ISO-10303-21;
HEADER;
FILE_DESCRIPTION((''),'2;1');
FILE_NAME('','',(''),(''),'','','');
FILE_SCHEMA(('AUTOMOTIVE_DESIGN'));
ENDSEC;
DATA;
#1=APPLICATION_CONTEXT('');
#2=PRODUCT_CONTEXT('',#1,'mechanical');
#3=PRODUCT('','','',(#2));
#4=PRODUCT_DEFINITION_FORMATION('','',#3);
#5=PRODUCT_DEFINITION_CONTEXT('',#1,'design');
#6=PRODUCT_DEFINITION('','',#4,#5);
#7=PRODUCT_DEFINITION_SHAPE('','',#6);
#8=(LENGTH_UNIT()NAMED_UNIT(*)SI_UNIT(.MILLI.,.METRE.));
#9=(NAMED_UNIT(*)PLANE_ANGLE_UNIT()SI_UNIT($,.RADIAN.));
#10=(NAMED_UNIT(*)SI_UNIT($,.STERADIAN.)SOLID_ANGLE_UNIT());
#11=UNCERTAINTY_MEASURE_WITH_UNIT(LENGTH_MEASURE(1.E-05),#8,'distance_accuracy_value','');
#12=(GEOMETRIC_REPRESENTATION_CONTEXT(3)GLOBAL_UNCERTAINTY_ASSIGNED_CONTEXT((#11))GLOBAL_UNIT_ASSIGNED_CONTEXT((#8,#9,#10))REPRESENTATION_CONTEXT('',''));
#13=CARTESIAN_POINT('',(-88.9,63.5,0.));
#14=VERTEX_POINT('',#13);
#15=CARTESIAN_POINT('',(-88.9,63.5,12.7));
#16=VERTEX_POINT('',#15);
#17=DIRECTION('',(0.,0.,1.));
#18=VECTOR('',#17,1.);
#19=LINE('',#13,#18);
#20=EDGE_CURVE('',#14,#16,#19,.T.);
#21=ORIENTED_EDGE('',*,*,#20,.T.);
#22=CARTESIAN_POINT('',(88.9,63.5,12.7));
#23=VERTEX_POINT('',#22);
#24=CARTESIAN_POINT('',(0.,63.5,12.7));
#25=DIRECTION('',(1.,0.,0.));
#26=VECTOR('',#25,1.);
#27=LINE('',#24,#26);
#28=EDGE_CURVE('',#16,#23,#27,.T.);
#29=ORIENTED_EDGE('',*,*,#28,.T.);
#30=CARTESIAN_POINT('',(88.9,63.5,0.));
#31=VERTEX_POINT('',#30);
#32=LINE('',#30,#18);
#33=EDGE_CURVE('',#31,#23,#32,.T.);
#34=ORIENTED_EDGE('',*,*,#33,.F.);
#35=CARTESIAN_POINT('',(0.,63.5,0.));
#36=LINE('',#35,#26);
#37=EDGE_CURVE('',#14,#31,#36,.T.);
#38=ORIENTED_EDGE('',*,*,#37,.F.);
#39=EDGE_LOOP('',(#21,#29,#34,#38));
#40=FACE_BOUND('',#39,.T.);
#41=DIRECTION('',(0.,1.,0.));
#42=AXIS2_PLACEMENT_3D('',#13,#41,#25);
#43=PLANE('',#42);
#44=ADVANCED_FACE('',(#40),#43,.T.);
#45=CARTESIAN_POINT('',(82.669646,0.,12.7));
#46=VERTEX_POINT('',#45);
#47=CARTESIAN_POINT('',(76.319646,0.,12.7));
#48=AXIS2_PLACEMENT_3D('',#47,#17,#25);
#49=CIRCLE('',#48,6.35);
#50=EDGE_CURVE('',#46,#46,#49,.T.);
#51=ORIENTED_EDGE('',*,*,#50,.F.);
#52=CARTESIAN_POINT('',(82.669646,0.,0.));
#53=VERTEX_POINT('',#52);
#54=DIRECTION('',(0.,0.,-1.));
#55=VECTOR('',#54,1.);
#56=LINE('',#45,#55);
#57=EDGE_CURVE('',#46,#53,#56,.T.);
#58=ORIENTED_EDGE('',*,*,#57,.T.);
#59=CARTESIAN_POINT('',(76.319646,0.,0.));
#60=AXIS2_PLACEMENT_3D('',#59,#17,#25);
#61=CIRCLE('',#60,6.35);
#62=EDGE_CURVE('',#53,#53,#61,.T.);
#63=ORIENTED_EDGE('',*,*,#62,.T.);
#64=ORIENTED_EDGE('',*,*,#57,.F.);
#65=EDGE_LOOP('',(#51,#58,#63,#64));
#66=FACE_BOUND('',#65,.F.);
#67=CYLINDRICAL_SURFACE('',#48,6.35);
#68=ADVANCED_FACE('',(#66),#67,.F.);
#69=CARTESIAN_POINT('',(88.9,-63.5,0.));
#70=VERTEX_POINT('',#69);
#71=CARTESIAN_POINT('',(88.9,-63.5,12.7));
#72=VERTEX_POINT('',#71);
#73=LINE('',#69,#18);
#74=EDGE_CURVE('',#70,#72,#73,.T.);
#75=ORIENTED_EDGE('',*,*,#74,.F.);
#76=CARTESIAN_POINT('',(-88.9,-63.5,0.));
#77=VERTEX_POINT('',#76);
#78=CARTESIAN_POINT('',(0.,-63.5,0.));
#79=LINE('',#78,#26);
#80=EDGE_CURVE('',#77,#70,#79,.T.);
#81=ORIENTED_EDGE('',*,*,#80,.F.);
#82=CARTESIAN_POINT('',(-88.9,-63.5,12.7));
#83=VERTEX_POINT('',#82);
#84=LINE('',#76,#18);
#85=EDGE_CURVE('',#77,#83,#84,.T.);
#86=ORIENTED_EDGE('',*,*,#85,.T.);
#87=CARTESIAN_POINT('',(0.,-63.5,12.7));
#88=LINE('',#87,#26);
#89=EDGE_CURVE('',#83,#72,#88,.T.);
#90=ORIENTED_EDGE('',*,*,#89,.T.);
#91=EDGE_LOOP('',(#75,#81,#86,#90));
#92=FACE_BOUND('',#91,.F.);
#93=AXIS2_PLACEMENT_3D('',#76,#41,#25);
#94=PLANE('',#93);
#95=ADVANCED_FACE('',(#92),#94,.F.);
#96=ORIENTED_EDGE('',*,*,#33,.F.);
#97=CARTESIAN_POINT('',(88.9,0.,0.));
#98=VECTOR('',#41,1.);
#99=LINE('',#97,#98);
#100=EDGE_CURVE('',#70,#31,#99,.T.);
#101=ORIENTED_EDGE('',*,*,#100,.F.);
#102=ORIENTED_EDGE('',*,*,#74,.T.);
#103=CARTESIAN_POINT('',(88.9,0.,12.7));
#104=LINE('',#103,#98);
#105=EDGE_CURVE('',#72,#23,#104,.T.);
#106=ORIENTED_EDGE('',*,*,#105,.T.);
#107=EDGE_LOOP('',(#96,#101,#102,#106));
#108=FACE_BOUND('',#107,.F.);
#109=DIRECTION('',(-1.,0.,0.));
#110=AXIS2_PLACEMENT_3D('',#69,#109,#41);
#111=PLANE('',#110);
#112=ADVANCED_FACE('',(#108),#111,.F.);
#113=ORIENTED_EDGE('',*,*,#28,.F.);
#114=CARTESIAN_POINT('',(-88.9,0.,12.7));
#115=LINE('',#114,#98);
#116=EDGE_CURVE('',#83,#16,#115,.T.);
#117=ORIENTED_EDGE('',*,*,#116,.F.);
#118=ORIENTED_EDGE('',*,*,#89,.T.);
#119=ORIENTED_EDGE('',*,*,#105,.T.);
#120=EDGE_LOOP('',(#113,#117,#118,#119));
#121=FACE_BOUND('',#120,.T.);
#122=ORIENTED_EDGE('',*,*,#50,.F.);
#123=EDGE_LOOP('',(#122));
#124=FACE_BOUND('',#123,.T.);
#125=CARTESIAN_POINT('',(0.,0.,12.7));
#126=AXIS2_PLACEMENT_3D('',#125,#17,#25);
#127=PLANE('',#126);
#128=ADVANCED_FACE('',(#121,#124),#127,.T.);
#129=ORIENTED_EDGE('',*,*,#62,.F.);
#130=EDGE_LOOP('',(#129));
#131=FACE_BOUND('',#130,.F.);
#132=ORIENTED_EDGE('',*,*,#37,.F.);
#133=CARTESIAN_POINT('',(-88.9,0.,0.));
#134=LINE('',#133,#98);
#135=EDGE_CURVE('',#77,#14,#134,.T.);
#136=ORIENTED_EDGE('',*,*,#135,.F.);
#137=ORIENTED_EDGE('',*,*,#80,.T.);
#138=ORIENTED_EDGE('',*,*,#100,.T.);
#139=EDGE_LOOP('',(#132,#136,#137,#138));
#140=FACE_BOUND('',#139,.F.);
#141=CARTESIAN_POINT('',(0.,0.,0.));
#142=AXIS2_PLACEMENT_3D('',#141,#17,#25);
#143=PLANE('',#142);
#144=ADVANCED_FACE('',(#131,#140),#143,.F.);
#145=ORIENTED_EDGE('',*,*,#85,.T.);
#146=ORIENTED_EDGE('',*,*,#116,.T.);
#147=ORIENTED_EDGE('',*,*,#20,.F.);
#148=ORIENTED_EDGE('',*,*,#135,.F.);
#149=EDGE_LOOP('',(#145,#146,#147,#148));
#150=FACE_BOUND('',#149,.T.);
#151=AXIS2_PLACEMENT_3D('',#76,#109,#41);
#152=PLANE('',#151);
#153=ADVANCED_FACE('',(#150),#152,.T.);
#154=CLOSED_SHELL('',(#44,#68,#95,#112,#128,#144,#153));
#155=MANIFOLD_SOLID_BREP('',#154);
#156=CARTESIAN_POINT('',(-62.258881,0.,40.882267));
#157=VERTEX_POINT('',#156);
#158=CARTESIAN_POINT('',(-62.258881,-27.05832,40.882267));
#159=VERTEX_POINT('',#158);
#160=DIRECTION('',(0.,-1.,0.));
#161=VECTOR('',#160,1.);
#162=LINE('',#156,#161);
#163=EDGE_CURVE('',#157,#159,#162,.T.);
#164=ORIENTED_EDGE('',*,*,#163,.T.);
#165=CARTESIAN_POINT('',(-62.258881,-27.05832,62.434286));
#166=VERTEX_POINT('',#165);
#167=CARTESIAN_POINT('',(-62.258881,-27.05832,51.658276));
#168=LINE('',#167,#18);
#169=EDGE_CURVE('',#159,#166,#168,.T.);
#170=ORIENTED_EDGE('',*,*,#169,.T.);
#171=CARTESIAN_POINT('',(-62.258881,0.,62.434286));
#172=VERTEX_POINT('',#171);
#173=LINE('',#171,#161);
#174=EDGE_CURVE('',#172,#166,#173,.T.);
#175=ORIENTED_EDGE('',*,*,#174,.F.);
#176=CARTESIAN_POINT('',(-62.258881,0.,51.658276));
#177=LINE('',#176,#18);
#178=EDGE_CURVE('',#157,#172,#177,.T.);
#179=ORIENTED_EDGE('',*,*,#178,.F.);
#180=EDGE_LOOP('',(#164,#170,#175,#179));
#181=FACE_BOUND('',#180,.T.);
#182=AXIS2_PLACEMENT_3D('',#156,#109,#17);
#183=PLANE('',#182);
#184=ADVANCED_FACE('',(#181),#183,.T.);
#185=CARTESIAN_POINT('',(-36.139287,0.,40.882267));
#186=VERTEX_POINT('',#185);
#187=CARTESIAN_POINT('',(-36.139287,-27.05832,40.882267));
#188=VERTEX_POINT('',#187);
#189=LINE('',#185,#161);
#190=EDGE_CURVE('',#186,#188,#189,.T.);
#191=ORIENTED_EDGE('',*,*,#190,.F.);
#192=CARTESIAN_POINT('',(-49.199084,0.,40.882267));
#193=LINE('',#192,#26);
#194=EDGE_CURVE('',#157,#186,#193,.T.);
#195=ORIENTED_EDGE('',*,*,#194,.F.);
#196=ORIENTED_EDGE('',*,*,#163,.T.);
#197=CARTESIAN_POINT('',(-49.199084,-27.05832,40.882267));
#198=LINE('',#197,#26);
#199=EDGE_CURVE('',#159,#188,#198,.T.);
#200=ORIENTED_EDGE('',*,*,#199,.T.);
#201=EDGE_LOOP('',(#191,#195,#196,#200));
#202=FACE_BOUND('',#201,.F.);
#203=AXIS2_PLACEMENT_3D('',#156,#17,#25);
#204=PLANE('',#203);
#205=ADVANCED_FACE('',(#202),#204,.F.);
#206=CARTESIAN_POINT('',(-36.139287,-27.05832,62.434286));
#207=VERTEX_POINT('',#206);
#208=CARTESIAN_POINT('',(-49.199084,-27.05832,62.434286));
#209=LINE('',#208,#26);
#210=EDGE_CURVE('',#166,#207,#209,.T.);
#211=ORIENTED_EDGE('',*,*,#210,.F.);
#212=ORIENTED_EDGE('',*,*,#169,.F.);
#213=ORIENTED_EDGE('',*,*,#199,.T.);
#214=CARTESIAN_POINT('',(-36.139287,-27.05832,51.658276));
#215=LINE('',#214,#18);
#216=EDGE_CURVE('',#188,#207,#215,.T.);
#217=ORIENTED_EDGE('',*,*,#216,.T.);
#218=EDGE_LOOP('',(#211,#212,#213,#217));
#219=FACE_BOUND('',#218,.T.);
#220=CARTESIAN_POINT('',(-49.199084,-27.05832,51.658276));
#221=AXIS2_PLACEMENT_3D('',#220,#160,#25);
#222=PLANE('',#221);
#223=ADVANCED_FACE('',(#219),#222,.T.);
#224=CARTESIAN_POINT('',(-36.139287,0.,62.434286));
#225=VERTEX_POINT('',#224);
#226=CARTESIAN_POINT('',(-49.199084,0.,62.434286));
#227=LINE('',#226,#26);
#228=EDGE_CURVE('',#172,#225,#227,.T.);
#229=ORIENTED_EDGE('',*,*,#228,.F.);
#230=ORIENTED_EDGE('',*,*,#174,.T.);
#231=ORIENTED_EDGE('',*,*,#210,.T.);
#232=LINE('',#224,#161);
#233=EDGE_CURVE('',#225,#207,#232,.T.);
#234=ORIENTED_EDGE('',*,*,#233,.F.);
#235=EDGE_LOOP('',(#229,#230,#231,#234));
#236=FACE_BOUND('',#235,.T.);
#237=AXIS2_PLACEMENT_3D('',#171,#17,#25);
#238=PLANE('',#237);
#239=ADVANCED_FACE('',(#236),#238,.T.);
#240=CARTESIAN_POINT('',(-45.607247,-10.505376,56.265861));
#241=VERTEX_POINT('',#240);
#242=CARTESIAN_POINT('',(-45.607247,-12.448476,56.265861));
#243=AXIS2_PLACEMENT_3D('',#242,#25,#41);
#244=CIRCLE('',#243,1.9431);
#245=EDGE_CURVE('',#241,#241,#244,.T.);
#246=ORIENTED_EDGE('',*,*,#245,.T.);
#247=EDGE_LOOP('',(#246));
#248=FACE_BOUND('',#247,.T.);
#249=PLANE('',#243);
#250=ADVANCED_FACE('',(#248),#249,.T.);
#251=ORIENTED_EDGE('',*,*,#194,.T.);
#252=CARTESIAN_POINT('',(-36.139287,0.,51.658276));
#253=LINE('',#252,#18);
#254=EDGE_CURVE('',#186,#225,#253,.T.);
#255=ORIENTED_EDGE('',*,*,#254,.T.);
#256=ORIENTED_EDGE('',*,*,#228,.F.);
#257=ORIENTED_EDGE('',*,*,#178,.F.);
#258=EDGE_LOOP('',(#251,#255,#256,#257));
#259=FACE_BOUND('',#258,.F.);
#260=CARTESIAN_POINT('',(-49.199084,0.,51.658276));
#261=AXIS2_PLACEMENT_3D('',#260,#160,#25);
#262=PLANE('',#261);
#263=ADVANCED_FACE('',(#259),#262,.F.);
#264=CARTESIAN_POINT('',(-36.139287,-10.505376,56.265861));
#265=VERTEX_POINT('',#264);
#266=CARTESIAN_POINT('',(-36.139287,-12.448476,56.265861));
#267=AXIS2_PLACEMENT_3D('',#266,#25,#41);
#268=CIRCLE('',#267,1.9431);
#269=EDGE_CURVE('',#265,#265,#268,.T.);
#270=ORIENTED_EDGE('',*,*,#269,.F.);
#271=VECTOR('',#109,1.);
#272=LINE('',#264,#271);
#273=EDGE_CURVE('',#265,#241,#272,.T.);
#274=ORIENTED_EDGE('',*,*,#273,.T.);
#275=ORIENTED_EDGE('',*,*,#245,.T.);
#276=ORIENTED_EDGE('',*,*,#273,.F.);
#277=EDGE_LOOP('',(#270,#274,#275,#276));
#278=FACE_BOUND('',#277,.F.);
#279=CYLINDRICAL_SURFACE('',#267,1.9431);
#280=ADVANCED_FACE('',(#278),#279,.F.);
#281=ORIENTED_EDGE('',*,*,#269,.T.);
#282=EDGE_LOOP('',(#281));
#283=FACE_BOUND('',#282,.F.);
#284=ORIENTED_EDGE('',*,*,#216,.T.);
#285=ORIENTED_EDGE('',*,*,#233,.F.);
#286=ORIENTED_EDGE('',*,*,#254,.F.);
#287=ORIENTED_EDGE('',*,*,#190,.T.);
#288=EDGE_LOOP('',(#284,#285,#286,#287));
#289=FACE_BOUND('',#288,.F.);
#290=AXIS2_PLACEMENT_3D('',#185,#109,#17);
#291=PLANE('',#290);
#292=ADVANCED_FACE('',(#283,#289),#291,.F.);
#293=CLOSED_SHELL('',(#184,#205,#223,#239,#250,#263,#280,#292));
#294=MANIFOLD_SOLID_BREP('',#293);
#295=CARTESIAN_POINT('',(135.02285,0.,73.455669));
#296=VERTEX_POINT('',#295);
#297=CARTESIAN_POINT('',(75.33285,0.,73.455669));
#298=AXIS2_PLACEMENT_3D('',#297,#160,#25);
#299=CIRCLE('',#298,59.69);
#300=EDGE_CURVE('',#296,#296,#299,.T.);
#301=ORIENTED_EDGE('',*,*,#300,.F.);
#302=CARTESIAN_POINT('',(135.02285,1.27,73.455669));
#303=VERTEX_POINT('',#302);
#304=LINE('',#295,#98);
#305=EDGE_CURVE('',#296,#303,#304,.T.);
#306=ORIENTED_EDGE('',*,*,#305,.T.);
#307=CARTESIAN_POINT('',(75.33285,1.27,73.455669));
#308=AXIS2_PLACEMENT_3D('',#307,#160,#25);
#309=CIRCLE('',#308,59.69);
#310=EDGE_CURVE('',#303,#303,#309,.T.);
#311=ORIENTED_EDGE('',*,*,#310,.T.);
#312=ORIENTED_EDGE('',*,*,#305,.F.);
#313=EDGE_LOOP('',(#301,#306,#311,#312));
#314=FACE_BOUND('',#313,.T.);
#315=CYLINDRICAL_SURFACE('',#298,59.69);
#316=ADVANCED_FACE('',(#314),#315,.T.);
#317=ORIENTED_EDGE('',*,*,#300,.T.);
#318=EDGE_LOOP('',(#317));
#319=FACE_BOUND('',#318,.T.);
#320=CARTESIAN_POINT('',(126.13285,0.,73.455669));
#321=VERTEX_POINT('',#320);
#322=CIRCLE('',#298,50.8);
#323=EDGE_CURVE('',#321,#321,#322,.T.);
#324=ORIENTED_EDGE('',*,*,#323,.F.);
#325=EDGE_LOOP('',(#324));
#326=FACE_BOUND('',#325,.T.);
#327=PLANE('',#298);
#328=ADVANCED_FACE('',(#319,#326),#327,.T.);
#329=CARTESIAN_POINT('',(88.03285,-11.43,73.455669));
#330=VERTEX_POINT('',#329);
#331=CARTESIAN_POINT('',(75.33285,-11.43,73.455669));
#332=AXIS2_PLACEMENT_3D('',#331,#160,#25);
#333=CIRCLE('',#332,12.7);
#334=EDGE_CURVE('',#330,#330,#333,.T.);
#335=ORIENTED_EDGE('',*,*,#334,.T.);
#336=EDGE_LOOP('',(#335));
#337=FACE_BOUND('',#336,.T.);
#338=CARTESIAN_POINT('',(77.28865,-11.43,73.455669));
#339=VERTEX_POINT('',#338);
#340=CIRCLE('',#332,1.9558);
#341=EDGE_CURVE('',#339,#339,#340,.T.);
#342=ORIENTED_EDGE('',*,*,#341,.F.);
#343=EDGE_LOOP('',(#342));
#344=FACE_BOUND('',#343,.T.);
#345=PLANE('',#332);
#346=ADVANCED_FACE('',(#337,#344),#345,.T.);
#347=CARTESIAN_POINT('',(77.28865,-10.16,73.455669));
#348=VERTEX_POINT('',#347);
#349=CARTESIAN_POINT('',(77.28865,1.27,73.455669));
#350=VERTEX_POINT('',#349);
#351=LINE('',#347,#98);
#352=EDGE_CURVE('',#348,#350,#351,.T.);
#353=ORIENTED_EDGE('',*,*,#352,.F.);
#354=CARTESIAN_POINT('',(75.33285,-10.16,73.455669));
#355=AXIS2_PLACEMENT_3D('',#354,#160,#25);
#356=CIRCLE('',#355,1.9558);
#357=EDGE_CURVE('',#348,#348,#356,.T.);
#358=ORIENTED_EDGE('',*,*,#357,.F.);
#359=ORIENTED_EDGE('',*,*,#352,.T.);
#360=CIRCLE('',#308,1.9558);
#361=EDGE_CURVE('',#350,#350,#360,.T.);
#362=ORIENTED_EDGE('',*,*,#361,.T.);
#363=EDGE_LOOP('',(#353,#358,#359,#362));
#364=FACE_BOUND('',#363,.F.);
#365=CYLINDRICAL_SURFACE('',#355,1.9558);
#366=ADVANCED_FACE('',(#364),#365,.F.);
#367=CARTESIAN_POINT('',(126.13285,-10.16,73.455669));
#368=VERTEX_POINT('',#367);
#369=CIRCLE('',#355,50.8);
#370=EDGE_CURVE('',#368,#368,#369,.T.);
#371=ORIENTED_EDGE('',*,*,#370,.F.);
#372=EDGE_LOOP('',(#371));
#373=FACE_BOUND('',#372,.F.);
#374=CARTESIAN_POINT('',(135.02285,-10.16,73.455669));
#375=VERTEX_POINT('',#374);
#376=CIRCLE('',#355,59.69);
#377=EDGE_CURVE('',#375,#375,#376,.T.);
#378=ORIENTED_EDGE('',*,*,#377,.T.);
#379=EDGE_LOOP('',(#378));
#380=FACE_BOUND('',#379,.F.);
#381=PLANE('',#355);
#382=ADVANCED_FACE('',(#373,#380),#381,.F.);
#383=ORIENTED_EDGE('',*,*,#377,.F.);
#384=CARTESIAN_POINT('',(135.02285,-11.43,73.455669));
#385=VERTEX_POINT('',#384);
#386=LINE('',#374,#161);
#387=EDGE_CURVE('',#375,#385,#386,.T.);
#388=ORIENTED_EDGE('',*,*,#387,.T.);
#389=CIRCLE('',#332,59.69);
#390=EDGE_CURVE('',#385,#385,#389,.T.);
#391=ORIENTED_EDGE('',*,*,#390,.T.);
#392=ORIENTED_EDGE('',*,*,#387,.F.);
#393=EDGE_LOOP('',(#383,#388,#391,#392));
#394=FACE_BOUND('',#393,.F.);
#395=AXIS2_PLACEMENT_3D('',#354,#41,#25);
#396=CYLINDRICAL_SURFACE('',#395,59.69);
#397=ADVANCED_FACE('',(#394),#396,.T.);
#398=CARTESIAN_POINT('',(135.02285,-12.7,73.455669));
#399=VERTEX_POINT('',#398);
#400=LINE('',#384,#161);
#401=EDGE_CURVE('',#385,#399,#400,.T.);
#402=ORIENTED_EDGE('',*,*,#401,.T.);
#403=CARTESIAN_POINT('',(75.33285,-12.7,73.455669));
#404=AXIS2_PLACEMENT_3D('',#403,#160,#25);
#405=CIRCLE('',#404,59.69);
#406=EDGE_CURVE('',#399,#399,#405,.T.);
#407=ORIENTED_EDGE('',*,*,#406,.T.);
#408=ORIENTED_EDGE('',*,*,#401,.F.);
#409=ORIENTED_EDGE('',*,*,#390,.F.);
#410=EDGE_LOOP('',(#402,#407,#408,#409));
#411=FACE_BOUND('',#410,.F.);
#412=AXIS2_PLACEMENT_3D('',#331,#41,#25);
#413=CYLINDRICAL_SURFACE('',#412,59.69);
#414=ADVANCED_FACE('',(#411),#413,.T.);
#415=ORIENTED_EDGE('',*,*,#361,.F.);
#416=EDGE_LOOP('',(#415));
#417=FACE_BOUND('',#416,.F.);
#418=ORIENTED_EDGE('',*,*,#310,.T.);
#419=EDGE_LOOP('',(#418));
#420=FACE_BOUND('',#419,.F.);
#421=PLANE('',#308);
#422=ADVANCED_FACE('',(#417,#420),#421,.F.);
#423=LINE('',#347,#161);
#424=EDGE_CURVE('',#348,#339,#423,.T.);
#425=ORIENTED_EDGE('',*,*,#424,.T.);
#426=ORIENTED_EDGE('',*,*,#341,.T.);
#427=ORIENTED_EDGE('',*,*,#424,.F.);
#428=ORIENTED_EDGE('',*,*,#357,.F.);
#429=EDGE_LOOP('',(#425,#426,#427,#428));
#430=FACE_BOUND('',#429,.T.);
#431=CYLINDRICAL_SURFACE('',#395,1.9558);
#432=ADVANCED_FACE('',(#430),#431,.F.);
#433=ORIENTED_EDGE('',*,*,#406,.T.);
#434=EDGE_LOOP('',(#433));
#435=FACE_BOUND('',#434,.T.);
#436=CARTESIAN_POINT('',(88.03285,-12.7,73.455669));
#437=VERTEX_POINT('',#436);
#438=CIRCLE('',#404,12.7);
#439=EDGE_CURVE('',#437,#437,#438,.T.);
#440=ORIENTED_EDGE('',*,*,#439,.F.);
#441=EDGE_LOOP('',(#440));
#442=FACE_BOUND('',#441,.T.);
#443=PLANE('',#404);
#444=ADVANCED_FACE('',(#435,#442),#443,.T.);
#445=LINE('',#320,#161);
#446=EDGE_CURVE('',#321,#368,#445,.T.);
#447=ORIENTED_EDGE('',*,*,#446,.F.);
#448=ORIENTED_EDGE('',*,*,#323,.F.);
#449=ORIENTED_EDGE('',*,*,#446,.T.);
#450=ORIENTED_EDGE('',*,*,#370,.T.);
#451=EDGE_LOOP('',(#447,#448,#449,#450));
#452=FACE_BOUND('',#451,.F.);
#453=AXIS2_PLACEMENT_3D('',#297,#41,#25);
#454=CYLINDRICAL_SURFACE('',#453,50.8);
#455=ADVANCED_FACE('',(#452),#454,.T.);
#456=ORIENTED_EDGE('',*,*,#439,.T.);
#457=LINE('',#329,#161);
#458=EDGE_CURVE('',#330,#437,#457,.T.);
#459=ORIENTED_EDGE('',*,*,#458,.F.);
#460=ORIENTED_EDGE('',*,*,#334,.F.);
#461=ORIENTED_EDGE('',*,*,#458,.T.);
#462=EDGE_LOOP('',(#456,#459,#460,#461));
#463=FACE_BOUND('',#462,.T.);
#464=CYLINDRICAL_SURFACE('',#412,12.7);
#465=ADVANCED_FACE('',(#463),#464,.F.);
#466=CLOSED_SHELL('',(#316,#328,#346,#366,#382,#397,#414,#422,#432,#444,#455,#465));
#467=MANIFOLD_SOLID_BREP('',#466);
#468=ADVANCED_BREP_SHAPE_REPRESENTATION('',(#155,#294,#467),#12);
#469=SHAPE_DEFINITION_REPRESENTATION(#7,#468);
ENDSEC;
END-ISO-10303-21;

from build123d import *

# Parameters (mm, degrees)
F0_W           = 177.8
F0_H           = 127
F1_DEPTH       = 12.7
F2_W           = 26.1195935309
F2_H           = 21.5520188212
F3_DEPTH       = 27.05832
F4_R           = 1.9431
F5_DEPTH       = 9.46796
F6_R           = 50.8
F7_DEPTH       = 10.16
F6_R_2         = 59.69
F8_DEPTH       = 1.27
F9_R           = 1.9558
F10_DEPTH      = 25.4
F10_DEPTH_BACK = 75.06569
F9_R_2         = 59.69
F9_R_3         = 50.8
F9_R_4         = 12.7
F11_DEPTH      = 1.27
F11_FACE_R     = 59.69
F11_FACE_R_2   = 12.7
F12_DEPTH      = 1.27
F13_R          = 6.35
F14_DEPTH      = 25.4


# Not quite as in the source:
# - a length typed as a fraction of an inch, garbled in the dataset ("3 / 203.2 mm" for 3/8 in), is restored


with BuildPart() as f1:
    # F0 (on Top) → F1 (new body)
    with BuildSketch(Plane.XY):
        Rectangle(F0_W, F0_H)
    extrude(amount=F1_DEPTH)

    # F13 (on face) → F14 (cut)
    with BuildSketch(Plane.XY.offset(12.7)):
        with Locations((76.3196462645, 0)):
            Circle(F13_R)
    extrude(amount=-F14_DEPTH, mode=Mode.SUBTRACT)


with BuildPart() as f3:
    # F2 (on Front) → F3 (new body)
    with BuildSketch(Plane.XZ):
        with Locations((-49.19908382, 51.6582764685)):
            Rectangle(F2_W, F2_H)
    extrude(amount=F3_DEPTH)

    # F4 (on face) → F5 (cut)
    with BuildSketch(Plane.YZ.offset(-36.1392870545)):
        with Locations((-12.4484756961, 56.265860796)):
            Circle(F4_R)
    extrude(amount=-F5_DEPTH, mode=Mode.SUBTRACT)


with BuildPart() as f7:
    # F6 (on Front) → F7 (new body)
    with BuildSketch(Plane.XZ):
        with Locations((75.3328502178, 73.4556689858)):
            Circle(F6_R)
    extrude(amount=F7_DEPTH)

    # F6 (on Front) → F8 (join)
    with BuildSketch(Plane.XZ):
        with Locations((75.3328502178, 73.4556689858)):
            Circle(F6_R_2)
        with Locations((75.3328502178, 73.4556689858)):
            Circle(F6_R, mode=Mode.SUBTRACT)
        with Locations((75.3328502178, 73.4556689858)):
            Circle(F6_R)
    extrude(amount=-F8_DEPTH)

    # F9 (on face) → F10 (cut, two sides)
    with BuildSketch(Plane.XZ.offset(10.16)) as f10_sk:
        with Locations((75.3328502178, 73.4556689858)):
            Circle(F9_R)
    extrude(amount=-F10_DEPTH, mode=Mode.SUBTRACT)
    extrude(f10_sk.sketch, amount=F10_DEPTH_BACK, mode=Mode.SUBTRACT)

    # F9 (on face) → F11 (join)
    with BuildSketch(Plane.XZ.offset(10.16)):
        with Locations((75.3328502178, 73.4556689858)):
            Circle(F9_R_2)
        with Locations((75.3328502178, 73.4556689858)):
            Circle(F9_R_3, mode=Mode.SUBTRACT)
        with Locations((75.3328502178, 73.4556689858)):
            Circle(F9_R_3)
        with Locations((75.3328502178, 73.4556689858)):
            Circle(F9_R_4, mode=Mode.SUBTRACT)
    extrude(amount=F11_DEPTH)

    # F9 (on face) + F11_face (on face) → F12 (join)
    with BuildSketch(Plane.XZ.offset(10.16)):
        with Locations((75.3328502178, 73.4556689858)):
            Circle(F9_R_4)
        with Locations((75.3328502178, 73.4556689858)):
            Circle(F9_R, mode=Mode.SUBTRACT)
    with BuildSketch(Plane(origin=(75.3328502178, -11.43, 73.4556689858), x_dir=(1, 0, 0), z_dir=(0, -1, 0))):
        Circle(F11_FACE_R)
        Circle(F11_FACE_R_2, mode=Mode.SUBTRACT)
    extrude(amount=F12_DEPTH)


solid = Compound([f1.part, f3.part, f7.part])
